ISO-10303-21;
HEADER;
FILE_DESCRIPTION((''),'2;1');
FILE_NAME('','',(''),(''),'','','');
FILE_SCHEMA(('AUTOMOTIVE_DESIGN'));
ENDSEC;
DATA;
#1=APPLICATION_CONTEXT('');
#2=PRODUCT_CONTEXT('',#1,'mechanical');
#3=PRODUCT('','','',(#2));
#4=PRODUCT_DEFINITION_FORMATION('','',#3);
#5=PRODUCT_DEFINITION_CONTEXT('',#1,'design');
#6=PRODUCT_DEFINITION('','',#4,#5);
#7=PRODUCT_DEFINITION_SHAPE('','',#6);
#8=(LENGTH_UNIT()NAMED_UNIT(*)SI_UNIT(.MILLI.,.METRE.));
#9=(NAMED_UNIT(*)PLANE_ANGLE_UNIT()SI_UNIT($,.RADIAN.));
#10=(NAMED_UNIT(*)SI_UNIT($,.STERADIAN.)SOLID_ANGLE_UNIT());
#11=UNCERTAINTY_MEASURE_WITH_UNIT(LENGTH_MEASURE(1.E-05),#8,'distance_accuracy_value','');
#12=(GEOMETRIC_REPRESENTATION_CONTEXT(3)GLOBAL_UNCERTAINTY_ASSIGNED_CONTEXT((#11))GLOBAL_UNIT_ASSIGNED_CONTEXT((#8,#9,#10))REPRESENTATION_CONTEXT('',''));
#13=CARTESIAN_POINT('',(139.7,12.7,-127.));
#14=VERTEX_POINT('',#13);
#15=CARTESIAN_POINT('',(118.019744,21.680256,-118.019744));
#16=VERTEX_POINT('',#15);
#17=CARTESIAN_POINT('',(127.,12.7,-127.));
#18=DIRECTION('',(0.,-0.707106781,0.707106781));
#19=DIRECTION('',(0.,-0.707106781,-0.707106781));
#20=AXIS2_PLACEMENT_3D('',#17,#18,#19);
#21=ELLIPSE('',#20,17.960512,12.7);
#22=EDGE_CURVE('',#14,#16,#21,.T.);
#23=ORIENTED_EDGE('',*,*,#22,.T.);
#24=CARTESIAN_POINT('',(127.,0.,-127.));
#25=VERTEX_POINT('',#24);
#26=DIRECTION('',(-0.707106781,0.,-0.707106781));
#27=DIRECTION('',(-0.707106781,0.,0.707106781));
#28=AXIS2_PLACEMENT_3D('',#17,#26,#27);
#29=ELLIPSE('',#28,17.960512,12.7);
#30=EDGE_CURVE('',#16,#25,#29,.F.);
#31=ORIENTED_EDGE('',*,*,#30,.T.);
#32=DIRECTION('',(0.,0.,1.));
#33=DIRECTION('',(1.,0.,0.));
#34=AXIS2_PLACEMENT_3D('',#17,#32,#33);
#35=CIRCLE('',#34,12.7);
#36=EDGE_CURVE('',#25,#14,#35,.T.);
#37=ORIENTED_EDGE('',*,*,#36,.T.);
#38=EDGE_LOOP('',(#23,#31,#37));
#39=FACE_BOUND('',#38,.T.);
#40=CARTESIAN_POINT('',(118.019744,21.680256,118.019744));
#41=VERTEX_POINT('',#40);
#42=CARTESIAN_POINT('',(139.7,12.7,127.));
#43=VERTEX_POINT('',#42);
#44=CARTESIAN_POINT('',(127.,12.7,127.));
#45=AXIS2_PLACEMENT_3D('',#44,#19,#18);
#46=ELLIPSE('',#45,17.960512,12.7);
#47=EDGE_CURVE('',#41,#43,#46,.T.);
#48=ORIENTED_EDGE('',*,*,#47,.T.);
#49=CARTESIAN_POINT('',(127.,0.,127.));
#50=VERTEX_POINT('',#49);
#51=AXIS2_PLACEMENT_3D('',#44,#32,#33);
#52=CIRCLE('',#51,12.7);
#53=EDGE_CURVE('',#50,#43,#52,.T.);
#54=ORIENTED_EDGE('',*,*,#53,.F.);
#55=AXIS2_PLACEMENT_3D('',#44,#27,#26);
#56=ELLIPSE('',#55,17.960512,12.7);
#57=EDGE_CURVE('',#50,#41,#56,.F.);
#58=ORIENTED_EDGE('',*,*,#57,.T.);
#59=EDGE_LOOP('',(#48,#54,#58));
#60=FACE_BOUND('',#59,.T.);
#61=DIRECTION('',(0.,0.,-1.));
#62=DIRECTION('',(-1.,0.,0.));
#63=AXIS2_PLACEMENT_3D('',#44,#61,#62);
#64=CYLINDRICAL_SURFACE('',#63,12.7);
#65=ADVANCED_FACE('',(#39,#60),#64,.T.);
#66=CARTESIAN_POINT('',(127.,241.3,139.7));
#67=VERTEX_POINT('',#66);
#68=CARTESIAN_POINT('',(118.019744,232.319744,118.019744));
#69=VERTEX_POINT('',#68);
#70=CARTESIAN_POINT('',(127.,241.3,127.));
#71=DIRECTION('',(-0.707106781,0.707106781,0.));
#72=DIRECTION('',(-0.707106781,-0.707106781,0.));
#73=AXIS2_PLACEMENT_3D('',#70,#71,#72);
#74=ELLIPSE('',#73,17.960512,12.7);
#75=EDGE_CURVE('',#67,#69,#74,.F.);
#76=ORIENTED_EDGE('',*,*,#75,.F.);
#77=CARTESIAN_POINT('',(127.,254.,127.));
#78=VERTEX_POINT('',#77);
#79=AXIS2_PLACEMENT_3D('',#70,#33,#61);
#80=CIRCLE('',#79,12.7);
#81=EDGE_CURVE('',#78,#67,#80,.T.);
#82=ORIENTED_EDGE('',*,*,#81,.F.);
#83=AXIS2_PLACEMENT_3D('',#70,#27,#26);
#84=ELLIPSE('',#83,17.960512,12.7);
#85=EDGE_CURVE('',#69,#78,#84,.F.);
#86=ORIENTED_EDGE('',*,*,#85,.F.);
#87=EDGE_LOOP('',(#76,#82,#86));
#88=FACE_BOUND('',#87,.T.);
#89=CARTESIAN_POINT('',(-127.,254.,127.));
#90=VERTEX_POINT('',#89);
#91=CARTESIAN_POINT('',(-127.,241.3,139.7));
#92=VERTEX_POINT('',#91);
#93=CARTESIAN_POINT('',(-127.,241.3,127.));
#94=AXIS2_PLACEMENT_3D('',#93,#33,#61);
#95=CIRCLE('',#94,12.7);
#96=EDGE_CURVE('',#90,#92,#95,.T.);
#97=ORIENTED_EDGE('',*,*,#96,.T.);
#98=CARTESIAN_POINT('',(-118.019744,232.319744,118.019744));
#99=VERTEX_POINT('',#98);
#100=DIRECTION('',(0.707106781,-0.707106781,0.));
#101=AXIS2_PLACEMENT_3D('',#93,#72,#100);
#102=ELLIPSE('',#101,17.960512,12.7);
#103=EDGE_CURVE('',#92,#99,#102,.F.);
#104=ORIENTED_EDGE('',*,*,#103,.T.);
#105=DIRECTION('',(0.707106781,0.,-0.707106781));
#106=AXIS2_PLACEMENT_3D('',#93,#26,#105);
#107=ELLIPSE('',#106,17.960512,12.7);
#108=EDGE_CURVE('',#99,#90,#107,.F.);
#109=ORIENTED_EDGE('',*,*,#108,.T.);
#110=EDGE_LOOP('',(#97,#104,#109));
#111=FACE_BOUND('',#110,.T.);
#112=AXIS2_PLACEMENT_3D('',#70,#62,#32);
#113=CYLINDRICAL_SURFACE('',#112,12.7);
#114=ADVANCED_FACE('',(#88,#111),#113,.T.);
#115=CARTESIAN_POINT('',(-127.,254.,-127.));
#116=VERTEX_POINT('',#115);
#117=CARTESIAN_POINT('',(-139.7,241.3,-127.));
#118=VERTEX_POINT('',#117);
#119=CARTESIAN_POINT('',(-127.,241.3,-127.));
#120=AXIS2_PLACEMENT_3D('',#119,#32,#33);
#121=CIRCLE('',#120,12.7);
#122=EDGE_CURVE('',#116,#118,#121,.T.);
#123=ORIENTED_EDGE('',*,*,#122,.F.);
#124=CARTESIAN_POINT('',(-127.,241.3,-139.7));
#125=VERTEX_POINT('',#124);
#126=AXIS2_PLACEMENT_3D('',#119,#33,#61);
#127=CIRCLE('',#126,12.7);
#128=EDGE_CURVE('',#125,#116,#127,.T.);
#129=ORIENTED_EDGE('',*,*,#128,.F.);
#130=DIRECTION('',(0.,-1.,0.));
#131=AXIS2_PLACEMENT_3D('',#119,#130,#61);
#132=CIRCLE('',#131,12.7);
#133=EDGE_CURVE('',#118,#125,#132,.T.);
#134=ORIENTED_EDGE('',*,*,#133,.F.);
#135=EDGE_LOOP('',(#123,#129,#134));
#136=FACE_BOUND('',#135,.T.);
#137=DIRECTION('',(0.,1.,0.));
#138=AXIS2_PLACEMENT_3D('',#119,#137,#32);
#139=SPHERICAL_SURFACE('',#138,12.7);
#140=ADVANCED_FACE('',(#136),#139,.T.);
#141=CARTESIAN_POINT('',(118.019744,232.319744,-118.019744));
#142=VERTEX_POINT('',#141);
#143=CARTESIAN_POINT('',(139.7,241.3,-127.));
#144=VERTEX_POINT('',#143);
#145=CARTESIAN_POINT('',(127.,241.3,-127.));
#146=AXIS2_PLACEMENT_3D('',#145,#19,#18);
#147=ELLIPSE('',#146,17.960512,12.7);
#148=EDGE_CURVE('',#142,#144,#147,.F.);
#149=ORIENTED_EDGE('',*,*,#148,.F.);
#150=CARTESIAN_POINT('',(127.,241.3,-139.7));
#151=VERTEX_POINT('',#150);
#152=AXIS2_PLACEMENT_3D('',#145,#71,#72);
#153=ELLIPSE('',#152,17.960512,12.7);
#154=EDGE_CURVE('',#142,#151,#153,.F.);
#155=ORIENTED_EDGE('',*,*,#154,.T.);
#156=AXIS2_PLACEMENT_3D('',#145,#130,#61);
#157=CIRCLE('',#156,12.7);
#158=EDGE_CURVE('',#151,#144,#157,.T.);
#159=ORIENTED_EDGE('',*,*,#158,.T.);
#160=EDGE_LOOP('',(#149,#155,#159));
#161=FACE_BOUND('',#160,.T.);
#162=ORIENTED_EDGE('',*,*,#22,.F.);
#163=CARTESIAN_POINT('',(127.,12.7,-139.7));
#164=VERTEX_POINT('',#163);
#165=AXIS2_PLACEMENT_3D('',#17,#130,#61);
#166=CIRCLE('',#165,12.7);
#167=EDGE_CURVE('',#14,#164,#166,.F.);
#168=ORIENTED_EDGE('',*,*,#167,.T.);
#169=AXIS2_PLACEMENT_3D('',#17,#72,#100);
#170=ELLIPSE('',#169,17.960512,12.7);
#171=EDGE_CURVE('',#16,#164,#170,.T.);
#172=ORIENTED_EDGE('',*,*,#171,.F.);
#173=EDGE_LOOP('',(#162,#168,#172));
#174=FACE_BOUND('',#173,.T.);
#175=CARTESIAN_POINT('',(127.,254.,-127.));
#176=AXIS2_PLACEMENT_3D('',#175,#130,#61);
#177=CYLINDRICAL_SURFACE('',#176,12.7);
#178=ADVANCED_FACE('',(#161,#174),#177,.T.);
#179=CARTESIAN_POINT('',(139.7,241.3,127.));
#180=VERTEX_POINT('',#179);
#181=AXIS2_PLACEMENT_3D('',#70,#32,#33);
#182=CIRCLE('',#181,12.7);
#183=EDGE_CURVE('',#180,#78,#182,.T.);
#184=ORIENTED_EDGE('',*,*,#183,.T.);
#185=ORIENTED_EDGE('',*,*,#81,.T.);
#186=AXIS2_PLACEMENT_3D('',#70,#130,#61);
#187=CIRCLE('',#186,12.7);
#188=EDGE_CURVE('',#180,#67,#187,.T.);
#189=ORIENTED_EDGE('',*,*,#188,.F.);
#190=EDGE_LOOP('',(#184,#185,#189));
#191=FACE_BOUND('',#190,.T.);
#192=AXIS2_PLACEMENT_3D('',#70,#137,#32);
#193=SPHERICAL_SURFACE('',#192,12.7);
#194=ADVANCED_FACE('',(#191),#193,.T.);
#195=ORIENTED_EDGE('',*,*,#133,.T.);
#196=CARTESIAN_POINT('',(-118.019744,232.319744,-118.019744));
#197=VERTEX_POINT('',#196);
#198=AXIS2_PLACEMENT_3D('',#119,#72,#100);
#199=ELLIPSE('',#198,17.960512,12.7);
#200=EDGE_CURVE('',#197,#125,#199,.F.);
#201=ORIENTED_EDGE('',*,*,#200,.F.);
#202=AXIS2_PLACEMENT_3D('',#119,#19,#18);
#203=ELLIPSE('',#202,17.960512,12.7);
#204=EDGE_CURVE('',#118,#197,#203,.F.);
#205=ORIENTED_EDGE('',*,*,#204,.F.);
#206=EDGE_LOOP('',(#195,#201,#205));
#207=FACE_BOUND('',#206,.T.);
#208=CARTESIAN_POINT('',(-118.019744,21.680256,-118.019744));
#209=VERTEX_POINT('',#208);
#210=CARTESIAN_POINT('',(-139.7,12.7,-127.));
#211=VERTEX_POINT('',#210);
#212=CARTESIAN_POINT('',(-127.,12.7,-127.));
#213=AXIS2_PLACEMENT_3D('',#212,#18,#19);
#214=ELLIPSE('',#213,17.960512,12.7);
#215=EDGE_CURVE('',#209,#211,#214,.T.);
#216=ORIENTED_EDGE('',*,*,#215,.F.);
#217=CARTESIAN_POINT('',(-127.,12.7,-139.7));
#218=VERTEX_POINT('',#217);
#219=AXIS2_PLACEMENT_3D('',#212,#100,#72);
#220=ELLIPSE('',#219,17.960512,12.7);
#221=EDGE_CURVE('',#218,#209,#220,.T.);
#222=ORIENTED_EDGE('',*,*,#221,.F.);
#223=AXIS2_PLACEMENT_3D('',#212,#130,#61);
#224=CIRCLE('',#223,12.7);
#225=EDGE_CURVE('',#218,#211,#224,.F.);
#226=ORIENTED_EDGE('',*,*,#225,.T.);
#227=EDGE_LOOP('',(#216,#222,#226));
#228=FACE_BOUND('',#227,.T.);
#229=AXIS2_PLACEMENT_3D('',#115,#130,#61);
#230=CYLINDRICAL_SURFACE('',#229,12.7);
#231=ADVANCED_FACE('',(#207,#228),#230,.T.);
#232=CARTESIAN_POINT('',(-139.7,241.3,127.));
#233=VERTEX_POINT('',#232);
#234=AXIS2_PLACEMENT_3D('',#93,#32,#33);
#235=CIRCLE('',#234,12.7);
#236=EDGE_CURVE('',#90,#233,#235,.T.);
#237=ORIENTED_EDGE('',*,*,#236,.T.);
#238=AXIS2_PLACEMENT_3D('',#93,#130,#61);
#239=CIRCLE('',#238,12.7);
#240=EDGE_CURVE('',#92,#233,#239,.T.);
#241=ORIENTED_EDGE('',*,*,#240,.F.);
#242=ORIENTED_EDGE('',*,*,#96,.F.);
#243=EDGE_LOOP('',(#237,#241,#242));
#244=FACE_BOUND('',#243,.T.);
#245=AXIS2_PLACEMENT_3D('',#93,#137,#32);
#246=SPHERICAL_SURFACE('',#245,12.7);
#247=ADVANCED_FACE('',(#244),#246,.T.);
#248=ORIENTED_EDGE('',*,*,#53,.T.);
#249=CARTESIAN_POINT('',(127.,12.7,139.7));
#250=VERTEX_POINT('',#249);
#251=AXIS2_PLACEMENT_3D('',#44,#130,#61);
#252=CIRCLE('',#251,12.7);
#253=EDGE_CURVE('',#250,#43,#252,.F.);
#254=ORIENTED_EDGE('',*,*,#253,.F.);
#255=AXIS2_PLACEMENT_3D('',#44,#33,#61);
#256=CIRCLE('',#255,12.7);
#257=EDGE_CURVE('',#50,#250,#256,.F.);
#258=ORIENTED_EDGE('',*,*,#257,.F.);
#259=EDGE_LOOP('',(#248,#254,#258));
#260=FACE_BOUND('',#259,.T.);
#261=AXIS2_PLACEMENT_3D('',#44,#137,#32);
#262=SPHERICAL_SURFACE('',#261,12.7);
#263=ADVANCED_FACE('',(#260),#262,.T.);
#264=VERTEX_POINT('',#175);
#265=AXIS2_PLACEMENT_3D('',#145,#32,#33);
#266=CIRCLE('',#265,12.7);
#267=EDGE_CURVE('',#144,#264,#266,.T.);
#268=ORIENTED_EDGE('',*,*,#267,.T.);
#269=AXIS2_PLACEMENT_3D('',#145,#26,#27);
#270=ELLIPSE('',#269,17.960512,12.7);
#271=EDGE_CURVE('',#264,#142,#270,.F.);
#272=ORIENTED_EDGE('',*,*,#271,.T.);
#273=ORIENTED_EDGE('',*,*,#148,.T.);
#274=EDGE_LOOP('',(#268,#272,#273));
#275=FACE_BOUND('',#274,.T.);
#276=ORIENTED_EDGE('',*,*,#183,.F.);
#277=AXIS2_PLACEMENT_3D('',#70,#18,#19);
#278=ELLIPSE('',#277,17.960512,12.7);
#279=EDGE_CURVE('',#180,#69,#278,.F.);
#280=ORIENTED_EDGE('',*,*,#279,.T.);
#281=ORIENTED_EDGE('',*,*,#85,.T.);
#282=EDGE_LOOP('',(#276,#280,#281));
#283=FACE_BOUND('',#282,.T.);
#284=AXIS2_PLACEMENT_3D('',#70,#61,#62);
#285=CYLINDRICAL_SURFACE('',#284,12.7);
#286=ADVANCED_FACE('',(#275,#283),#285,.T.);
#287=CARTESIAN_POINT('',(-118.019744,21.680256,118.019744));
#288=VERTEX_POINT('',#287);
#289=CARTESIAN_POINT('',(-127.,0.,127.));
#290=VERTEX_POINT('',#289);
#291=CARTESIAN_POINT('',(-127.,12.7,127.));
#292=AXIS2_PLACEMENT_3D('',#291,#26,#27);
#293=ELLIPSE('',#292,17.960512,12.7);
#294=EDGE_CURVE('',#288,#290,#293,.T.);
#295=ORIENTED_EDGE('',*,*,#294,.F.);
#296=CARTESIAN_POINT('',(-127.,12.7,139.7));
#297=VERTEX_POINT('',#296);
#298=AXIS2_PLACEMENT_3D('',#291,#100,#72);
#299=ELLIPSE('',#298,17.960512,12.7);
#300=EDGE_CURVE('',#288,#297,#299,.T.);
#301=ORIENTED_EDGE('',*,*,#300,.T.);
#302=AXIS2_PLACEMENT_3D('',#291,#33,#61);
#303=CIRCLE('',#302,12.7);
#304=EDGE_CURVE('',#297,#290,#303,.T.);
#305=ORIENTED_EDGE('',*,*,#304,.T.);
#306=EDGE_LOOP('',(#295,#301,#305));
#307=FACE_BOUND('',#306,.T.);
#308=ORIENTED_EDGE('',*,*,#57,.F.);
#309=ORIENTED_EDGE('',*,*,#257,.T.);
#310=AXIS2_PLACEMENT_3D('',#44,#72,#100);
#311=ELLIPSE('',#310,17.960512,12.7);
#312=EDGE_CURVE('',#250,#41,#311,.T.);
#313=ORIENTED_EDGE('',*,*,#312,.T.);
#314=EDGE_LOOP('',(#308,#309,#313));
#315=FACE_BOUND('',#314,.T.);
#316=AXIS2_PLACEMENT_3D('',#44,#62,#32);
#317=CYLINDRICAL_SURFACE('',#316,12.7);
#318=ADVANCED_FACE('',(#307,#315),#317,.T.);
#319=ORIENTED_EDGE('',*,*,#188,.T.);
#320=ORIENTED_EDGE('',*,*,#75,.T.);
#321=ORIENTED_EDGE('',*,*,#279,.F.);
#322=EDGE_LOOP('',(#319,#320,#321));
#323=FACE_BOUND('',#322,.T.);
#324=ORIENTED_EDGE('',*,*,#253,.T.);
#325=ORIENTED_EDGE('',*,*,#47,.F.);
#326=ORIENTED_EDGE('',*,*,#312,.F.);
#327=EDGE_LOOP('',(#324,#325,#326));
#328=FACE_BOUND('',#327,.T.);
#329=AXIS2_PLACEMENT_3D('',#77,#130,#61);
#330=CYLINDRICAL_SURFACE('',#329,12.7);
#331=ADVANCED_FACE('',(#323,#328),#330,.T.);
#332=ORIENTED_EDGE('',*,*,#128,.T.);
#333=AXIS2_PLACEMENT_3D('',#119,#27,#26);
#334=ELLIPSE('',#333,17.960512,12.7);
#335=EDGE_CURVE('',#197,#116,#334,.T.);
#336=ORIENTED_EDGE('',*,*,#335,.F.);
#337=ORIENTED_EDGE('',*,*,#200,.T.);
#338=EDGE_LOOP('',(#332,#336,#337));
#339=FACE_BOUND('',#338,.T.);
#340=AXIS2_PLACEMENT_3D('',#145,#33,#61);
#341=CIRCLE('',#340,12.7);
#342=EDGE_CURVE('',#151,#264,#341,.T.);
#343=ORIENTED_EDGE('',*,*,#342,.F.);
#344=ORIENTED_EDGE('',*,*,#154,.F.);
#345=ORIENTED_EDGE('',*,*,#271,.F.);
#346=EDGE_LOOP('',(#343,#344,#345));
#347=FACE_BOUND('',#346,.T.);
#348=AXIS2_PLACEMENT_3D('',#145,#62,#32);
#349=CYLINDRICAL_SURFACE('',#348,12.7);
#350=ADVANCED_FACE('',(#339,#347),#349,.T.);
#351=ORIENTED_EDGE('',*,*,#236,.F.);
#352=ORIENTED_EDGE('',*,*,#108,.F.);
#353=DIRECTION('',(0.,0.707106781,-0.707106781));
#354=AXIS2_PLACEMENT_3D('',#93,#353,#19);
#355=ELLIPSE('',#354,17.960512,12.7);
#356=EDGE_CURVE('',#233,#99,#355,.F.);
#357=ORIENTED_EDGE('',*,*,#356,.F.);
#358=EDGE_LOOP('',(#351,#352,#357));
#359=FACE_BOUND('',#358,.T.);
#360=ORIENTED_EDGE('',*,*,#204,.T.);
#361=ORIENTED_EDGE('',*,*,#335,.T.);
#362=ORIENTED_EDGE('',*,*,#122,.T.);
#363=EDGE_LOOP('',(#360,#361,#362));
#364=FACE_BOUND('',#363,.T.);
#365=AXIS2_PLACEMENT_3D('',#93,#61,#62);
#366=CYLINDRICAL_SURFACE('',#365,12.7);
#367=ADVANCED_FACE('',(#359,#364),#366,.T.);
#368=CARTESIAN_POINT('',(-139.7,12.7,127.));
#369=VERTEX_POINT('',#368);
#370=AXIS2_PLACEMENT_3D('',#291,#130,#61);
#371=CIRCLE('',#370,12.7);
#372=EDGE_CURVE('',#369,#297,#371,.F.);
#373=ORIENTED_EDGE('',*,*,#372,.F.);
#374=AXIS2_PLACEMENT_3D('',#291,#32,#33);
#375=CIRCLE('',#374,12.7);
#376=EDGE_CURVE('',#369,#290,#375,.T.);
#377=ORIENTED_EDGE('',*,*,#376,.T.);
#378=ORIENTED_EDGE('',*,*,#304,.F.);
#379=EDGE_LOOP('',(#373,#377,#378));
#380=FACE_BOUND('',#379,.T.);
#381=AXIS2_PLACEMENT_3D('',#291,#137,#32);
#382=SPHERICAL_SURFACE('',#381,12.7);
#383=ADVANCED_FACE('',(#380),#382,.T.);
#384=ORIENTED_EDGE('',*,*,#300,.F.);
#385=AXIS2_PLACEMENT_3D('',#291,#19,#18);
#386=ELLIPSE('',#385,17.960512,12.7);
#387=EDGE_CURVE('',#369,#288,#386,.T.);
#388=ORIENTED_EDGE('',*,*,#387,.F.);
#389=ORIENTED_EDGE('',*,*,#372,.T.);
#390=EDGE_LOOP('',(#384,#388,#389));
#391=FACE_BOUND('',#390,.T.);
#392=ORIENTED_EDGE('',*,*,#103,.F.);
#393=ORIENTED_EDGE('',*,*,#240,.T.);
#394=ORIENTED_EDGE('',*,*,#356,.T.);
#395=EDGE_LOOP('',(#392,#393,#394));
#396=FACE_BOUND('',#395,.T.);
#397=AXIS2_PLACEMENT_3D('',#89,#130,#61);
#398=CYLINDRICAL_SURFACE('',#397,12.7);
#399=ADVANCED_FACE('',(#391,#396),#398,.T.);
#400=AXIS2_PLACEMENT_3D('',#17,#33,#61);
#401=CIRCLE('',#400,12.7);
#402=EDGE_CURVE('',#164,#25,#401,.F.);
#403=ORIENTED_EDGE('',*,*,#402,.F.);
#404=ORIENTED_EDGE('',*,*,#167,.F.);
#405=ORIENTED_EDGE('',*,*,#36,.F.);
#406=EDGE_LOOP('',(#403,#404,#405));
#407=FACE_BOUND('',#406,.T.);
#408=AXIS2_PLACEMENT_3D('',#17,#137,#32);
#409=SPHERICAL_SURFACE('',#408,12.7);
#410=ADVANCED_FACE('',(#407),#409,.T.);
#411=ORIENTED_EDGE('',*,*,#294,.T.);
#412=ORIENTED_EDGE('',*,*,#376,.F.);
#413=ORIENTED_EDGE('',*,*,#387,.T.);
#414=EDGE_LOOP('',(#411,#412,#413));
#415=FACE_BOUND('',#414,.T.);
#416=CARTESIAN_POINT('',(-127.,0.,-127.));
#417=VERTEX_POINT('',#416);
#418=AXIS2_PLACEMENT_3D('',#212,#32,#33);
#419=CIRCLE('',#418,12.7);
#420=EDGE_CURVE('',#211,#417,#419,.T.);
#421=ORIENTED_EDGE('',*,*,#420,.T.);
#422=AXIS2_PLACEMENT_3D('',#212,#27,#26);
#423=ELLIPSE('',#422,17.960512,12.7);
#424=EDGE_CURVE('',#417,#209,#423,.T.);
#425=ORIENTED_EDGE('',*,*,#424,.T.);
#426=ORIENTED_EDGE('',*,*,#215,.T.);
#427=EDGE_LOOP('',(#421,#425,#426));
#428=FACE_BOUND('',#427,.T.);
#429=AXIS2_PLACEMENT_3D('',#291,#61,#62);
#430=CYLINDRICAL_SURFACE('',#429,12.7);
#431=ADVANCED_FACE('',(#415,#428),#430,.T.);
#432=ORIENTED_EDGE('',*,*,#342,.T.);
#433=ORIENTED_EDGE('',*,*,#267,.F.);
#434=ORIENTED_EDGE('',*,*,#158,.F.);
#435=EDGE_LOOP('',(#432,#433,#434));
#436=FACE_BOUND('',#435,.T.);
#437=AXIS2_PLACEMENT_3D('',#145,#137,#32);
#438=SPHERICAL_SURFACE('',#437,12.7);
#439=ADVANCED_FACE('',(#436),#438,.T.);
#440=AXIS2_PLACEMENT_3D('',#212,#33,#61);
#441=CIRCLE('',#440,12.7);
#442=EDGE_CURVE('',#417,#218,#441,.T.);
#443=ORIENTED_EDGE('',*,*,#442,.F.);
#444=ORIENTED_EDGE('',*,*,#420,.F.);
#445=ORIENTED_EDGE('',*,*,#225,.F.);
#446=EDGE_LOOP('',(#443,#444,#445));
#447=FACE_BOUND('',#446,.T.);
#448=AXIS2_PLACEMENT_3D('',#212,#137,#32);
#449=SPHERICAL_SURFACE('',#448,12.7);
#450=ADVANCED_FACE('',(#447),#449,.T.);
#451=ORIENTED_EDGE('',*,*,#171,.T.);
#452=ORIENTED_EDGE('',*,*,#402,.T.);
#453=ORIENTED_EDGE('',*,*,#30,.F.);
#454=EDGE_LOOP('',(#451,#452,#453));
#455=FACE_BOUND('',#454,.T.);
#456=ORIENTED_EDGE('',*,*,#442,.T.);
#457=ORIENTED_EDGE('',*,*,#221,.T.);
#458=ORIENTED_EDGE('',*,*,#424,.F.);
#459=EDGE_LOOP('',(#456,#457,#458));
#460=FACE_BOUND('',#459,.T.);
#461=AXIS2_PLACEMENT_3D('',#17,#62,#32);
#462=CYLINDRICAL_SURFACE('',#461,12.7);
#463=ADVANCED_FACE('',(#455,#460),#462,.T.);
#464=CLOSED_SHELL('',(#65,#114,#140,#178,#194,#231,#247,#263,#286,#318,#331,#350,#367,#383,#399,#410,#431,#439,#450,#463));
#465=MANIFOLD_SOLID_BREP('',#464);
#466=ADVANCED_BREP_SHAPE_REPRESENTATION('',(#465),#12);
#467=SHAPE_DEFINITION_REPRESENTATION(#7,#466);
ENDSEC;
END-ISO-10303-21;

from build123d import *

# Parameters (mm, degrees)
SKETCH5_R            = 12.7
BOSS_EXTRUDE2_DEPTH  = 254
FILLET2_R            = 12.7
LPATTERN1_COUNT      = 2
LPATTERN1_PITCH      = 254
LPATTERN1_2_COUNT    = 2
LPATTERN1_2_PITCH    = 254
SKETCH6_R            = 12.7
BOSS_EXTRUDE3_DEPTH  = 127
LPATTERN2_COUNT      = 2
LPATTERN2_PITCH      = 254
LPATTERN2_COUNT_DIR2 = 2
LPATTERN2_PITCH_DIR2 = 228.6
SKETCH8_R            = 12.7
BOSS_EXTRUDE4_DEPTH  = 127
LPATTERN3_START      = -126.903037271
LPATTERN3_OUTLINE_R  = 12.7
LPATTERN3_DEPTH      = 253.805198296


# Read off the part's stored shape, not the designer's step: LPattern3
with BuildPart() as part:
    # Sketch5 → Boss-Extrude2 (new body)
    with BuildSketch(Plane(origin=(0, 0, 0), x_dir=(1, 0, 0), z_dir=(0, 1, 0))):
        with Locations(Location((-127, 127, 0), (0, 0, 270))):
            Circle(SKETCH5_R)
    extrude(amount=BOSS_EXTRUDE2_DEPTH)

    # Fillet2
    fillet2_edges = [part.edges().sort_by_distance(p)[0] for p in [
        (-127, 0, -139.7),
        (-127, 254, -139.7),
    ]]
    fillet(fillet2_edges, radius=FILLET2_R)


with BuildPart() as lpattern1_1:
    # LPattern1: pattern copy
    add(part.part.moved(Location(Vector(1, 0, 0) * (1 * LPATTERN1_PITCH))))


with BuildPart() as lpattern1_2_1:
    # LPattern1 2: pattern copy
    add(part.part.moved(Location(Vector(0, 0, 1) * (1 * LPATTERN1_2_PITCH))))



with BuildPart() as lpattern1_2_2:
    # LPattern1 2: pattern copy
    add(lpattern1_1.part.moved(Location(Vector(0, 0, 1) * (1 * LPATTERN1_2_PITCH))))


with BuildPart() as lpattern1_2_1_1:
    add(lpattern1_2_1.part)

    add(lpattern1_2_2.part)  # Boss-Extrude3 merges LPattern1 2_2
    # Sketch6 → Boss-Extrude3 (add, symmetric)
    with BuildSketch(Plane(origin=(0, 0, 0), x_dir=(0, 0, -1), z_dir=(1, 0, 0))):
        with Locations(Location((-127, 241.3, 0), (0, 0, 180))):
            Circle(SKETCH6_R)
    boss_extrude3 = extrude(amount=BOSS_EXTRUDE3_DEPTH, both=True)


with BuildPart() as part_1:
    add(part.part)

    add(lpattern1_1.part)  # LPattern2 merges LPattern1_1

    add(lpattern1_2_1_1.part)  # LPattern2 merges LPattern1 2_1
    # LPattern2: Boss-Extrude3 2 × 2
    with Locations(*[(0, -j * LPATTERN2_PITCH_DIR2, -i * LPATTERN2_PITCH) for i in range(LPATTERN2_COUNT) for j in range(LPATTERN2_COUNT_DIR2) if (i, j) != (0, 0)]):
        add(boss_extrude3)

    # Sketch8 → Boss-Extrude4 (add, symmetric)
    with BuildSketch(Plane.XY):
        with Locations(Location((-127, 241.3, 0), (0, 0, 180))):
            Circle(SKETCH8_R)
    extrude(amount=BOSS_EXTRUDE4_DEPTH, both=True)

    # LPattern3 outline → LPattern3 (add)
    with BuildSketch(Plane.XY.offset(LPATTERN3_START)):
        with Locations((127, 12.7)):
            Circle(LPATTERN3_OUTLINE_R)
        with Locations((-127, 12.7)):
            Circle(LPATTERN3_OUTLINE_R)
        with Locations((127, 241.3)):
            Circle(LPATTERN3_OUTLINE_R)
    extrude(amount=LPATTERN3_DEPTH)


solid = part_1.part
